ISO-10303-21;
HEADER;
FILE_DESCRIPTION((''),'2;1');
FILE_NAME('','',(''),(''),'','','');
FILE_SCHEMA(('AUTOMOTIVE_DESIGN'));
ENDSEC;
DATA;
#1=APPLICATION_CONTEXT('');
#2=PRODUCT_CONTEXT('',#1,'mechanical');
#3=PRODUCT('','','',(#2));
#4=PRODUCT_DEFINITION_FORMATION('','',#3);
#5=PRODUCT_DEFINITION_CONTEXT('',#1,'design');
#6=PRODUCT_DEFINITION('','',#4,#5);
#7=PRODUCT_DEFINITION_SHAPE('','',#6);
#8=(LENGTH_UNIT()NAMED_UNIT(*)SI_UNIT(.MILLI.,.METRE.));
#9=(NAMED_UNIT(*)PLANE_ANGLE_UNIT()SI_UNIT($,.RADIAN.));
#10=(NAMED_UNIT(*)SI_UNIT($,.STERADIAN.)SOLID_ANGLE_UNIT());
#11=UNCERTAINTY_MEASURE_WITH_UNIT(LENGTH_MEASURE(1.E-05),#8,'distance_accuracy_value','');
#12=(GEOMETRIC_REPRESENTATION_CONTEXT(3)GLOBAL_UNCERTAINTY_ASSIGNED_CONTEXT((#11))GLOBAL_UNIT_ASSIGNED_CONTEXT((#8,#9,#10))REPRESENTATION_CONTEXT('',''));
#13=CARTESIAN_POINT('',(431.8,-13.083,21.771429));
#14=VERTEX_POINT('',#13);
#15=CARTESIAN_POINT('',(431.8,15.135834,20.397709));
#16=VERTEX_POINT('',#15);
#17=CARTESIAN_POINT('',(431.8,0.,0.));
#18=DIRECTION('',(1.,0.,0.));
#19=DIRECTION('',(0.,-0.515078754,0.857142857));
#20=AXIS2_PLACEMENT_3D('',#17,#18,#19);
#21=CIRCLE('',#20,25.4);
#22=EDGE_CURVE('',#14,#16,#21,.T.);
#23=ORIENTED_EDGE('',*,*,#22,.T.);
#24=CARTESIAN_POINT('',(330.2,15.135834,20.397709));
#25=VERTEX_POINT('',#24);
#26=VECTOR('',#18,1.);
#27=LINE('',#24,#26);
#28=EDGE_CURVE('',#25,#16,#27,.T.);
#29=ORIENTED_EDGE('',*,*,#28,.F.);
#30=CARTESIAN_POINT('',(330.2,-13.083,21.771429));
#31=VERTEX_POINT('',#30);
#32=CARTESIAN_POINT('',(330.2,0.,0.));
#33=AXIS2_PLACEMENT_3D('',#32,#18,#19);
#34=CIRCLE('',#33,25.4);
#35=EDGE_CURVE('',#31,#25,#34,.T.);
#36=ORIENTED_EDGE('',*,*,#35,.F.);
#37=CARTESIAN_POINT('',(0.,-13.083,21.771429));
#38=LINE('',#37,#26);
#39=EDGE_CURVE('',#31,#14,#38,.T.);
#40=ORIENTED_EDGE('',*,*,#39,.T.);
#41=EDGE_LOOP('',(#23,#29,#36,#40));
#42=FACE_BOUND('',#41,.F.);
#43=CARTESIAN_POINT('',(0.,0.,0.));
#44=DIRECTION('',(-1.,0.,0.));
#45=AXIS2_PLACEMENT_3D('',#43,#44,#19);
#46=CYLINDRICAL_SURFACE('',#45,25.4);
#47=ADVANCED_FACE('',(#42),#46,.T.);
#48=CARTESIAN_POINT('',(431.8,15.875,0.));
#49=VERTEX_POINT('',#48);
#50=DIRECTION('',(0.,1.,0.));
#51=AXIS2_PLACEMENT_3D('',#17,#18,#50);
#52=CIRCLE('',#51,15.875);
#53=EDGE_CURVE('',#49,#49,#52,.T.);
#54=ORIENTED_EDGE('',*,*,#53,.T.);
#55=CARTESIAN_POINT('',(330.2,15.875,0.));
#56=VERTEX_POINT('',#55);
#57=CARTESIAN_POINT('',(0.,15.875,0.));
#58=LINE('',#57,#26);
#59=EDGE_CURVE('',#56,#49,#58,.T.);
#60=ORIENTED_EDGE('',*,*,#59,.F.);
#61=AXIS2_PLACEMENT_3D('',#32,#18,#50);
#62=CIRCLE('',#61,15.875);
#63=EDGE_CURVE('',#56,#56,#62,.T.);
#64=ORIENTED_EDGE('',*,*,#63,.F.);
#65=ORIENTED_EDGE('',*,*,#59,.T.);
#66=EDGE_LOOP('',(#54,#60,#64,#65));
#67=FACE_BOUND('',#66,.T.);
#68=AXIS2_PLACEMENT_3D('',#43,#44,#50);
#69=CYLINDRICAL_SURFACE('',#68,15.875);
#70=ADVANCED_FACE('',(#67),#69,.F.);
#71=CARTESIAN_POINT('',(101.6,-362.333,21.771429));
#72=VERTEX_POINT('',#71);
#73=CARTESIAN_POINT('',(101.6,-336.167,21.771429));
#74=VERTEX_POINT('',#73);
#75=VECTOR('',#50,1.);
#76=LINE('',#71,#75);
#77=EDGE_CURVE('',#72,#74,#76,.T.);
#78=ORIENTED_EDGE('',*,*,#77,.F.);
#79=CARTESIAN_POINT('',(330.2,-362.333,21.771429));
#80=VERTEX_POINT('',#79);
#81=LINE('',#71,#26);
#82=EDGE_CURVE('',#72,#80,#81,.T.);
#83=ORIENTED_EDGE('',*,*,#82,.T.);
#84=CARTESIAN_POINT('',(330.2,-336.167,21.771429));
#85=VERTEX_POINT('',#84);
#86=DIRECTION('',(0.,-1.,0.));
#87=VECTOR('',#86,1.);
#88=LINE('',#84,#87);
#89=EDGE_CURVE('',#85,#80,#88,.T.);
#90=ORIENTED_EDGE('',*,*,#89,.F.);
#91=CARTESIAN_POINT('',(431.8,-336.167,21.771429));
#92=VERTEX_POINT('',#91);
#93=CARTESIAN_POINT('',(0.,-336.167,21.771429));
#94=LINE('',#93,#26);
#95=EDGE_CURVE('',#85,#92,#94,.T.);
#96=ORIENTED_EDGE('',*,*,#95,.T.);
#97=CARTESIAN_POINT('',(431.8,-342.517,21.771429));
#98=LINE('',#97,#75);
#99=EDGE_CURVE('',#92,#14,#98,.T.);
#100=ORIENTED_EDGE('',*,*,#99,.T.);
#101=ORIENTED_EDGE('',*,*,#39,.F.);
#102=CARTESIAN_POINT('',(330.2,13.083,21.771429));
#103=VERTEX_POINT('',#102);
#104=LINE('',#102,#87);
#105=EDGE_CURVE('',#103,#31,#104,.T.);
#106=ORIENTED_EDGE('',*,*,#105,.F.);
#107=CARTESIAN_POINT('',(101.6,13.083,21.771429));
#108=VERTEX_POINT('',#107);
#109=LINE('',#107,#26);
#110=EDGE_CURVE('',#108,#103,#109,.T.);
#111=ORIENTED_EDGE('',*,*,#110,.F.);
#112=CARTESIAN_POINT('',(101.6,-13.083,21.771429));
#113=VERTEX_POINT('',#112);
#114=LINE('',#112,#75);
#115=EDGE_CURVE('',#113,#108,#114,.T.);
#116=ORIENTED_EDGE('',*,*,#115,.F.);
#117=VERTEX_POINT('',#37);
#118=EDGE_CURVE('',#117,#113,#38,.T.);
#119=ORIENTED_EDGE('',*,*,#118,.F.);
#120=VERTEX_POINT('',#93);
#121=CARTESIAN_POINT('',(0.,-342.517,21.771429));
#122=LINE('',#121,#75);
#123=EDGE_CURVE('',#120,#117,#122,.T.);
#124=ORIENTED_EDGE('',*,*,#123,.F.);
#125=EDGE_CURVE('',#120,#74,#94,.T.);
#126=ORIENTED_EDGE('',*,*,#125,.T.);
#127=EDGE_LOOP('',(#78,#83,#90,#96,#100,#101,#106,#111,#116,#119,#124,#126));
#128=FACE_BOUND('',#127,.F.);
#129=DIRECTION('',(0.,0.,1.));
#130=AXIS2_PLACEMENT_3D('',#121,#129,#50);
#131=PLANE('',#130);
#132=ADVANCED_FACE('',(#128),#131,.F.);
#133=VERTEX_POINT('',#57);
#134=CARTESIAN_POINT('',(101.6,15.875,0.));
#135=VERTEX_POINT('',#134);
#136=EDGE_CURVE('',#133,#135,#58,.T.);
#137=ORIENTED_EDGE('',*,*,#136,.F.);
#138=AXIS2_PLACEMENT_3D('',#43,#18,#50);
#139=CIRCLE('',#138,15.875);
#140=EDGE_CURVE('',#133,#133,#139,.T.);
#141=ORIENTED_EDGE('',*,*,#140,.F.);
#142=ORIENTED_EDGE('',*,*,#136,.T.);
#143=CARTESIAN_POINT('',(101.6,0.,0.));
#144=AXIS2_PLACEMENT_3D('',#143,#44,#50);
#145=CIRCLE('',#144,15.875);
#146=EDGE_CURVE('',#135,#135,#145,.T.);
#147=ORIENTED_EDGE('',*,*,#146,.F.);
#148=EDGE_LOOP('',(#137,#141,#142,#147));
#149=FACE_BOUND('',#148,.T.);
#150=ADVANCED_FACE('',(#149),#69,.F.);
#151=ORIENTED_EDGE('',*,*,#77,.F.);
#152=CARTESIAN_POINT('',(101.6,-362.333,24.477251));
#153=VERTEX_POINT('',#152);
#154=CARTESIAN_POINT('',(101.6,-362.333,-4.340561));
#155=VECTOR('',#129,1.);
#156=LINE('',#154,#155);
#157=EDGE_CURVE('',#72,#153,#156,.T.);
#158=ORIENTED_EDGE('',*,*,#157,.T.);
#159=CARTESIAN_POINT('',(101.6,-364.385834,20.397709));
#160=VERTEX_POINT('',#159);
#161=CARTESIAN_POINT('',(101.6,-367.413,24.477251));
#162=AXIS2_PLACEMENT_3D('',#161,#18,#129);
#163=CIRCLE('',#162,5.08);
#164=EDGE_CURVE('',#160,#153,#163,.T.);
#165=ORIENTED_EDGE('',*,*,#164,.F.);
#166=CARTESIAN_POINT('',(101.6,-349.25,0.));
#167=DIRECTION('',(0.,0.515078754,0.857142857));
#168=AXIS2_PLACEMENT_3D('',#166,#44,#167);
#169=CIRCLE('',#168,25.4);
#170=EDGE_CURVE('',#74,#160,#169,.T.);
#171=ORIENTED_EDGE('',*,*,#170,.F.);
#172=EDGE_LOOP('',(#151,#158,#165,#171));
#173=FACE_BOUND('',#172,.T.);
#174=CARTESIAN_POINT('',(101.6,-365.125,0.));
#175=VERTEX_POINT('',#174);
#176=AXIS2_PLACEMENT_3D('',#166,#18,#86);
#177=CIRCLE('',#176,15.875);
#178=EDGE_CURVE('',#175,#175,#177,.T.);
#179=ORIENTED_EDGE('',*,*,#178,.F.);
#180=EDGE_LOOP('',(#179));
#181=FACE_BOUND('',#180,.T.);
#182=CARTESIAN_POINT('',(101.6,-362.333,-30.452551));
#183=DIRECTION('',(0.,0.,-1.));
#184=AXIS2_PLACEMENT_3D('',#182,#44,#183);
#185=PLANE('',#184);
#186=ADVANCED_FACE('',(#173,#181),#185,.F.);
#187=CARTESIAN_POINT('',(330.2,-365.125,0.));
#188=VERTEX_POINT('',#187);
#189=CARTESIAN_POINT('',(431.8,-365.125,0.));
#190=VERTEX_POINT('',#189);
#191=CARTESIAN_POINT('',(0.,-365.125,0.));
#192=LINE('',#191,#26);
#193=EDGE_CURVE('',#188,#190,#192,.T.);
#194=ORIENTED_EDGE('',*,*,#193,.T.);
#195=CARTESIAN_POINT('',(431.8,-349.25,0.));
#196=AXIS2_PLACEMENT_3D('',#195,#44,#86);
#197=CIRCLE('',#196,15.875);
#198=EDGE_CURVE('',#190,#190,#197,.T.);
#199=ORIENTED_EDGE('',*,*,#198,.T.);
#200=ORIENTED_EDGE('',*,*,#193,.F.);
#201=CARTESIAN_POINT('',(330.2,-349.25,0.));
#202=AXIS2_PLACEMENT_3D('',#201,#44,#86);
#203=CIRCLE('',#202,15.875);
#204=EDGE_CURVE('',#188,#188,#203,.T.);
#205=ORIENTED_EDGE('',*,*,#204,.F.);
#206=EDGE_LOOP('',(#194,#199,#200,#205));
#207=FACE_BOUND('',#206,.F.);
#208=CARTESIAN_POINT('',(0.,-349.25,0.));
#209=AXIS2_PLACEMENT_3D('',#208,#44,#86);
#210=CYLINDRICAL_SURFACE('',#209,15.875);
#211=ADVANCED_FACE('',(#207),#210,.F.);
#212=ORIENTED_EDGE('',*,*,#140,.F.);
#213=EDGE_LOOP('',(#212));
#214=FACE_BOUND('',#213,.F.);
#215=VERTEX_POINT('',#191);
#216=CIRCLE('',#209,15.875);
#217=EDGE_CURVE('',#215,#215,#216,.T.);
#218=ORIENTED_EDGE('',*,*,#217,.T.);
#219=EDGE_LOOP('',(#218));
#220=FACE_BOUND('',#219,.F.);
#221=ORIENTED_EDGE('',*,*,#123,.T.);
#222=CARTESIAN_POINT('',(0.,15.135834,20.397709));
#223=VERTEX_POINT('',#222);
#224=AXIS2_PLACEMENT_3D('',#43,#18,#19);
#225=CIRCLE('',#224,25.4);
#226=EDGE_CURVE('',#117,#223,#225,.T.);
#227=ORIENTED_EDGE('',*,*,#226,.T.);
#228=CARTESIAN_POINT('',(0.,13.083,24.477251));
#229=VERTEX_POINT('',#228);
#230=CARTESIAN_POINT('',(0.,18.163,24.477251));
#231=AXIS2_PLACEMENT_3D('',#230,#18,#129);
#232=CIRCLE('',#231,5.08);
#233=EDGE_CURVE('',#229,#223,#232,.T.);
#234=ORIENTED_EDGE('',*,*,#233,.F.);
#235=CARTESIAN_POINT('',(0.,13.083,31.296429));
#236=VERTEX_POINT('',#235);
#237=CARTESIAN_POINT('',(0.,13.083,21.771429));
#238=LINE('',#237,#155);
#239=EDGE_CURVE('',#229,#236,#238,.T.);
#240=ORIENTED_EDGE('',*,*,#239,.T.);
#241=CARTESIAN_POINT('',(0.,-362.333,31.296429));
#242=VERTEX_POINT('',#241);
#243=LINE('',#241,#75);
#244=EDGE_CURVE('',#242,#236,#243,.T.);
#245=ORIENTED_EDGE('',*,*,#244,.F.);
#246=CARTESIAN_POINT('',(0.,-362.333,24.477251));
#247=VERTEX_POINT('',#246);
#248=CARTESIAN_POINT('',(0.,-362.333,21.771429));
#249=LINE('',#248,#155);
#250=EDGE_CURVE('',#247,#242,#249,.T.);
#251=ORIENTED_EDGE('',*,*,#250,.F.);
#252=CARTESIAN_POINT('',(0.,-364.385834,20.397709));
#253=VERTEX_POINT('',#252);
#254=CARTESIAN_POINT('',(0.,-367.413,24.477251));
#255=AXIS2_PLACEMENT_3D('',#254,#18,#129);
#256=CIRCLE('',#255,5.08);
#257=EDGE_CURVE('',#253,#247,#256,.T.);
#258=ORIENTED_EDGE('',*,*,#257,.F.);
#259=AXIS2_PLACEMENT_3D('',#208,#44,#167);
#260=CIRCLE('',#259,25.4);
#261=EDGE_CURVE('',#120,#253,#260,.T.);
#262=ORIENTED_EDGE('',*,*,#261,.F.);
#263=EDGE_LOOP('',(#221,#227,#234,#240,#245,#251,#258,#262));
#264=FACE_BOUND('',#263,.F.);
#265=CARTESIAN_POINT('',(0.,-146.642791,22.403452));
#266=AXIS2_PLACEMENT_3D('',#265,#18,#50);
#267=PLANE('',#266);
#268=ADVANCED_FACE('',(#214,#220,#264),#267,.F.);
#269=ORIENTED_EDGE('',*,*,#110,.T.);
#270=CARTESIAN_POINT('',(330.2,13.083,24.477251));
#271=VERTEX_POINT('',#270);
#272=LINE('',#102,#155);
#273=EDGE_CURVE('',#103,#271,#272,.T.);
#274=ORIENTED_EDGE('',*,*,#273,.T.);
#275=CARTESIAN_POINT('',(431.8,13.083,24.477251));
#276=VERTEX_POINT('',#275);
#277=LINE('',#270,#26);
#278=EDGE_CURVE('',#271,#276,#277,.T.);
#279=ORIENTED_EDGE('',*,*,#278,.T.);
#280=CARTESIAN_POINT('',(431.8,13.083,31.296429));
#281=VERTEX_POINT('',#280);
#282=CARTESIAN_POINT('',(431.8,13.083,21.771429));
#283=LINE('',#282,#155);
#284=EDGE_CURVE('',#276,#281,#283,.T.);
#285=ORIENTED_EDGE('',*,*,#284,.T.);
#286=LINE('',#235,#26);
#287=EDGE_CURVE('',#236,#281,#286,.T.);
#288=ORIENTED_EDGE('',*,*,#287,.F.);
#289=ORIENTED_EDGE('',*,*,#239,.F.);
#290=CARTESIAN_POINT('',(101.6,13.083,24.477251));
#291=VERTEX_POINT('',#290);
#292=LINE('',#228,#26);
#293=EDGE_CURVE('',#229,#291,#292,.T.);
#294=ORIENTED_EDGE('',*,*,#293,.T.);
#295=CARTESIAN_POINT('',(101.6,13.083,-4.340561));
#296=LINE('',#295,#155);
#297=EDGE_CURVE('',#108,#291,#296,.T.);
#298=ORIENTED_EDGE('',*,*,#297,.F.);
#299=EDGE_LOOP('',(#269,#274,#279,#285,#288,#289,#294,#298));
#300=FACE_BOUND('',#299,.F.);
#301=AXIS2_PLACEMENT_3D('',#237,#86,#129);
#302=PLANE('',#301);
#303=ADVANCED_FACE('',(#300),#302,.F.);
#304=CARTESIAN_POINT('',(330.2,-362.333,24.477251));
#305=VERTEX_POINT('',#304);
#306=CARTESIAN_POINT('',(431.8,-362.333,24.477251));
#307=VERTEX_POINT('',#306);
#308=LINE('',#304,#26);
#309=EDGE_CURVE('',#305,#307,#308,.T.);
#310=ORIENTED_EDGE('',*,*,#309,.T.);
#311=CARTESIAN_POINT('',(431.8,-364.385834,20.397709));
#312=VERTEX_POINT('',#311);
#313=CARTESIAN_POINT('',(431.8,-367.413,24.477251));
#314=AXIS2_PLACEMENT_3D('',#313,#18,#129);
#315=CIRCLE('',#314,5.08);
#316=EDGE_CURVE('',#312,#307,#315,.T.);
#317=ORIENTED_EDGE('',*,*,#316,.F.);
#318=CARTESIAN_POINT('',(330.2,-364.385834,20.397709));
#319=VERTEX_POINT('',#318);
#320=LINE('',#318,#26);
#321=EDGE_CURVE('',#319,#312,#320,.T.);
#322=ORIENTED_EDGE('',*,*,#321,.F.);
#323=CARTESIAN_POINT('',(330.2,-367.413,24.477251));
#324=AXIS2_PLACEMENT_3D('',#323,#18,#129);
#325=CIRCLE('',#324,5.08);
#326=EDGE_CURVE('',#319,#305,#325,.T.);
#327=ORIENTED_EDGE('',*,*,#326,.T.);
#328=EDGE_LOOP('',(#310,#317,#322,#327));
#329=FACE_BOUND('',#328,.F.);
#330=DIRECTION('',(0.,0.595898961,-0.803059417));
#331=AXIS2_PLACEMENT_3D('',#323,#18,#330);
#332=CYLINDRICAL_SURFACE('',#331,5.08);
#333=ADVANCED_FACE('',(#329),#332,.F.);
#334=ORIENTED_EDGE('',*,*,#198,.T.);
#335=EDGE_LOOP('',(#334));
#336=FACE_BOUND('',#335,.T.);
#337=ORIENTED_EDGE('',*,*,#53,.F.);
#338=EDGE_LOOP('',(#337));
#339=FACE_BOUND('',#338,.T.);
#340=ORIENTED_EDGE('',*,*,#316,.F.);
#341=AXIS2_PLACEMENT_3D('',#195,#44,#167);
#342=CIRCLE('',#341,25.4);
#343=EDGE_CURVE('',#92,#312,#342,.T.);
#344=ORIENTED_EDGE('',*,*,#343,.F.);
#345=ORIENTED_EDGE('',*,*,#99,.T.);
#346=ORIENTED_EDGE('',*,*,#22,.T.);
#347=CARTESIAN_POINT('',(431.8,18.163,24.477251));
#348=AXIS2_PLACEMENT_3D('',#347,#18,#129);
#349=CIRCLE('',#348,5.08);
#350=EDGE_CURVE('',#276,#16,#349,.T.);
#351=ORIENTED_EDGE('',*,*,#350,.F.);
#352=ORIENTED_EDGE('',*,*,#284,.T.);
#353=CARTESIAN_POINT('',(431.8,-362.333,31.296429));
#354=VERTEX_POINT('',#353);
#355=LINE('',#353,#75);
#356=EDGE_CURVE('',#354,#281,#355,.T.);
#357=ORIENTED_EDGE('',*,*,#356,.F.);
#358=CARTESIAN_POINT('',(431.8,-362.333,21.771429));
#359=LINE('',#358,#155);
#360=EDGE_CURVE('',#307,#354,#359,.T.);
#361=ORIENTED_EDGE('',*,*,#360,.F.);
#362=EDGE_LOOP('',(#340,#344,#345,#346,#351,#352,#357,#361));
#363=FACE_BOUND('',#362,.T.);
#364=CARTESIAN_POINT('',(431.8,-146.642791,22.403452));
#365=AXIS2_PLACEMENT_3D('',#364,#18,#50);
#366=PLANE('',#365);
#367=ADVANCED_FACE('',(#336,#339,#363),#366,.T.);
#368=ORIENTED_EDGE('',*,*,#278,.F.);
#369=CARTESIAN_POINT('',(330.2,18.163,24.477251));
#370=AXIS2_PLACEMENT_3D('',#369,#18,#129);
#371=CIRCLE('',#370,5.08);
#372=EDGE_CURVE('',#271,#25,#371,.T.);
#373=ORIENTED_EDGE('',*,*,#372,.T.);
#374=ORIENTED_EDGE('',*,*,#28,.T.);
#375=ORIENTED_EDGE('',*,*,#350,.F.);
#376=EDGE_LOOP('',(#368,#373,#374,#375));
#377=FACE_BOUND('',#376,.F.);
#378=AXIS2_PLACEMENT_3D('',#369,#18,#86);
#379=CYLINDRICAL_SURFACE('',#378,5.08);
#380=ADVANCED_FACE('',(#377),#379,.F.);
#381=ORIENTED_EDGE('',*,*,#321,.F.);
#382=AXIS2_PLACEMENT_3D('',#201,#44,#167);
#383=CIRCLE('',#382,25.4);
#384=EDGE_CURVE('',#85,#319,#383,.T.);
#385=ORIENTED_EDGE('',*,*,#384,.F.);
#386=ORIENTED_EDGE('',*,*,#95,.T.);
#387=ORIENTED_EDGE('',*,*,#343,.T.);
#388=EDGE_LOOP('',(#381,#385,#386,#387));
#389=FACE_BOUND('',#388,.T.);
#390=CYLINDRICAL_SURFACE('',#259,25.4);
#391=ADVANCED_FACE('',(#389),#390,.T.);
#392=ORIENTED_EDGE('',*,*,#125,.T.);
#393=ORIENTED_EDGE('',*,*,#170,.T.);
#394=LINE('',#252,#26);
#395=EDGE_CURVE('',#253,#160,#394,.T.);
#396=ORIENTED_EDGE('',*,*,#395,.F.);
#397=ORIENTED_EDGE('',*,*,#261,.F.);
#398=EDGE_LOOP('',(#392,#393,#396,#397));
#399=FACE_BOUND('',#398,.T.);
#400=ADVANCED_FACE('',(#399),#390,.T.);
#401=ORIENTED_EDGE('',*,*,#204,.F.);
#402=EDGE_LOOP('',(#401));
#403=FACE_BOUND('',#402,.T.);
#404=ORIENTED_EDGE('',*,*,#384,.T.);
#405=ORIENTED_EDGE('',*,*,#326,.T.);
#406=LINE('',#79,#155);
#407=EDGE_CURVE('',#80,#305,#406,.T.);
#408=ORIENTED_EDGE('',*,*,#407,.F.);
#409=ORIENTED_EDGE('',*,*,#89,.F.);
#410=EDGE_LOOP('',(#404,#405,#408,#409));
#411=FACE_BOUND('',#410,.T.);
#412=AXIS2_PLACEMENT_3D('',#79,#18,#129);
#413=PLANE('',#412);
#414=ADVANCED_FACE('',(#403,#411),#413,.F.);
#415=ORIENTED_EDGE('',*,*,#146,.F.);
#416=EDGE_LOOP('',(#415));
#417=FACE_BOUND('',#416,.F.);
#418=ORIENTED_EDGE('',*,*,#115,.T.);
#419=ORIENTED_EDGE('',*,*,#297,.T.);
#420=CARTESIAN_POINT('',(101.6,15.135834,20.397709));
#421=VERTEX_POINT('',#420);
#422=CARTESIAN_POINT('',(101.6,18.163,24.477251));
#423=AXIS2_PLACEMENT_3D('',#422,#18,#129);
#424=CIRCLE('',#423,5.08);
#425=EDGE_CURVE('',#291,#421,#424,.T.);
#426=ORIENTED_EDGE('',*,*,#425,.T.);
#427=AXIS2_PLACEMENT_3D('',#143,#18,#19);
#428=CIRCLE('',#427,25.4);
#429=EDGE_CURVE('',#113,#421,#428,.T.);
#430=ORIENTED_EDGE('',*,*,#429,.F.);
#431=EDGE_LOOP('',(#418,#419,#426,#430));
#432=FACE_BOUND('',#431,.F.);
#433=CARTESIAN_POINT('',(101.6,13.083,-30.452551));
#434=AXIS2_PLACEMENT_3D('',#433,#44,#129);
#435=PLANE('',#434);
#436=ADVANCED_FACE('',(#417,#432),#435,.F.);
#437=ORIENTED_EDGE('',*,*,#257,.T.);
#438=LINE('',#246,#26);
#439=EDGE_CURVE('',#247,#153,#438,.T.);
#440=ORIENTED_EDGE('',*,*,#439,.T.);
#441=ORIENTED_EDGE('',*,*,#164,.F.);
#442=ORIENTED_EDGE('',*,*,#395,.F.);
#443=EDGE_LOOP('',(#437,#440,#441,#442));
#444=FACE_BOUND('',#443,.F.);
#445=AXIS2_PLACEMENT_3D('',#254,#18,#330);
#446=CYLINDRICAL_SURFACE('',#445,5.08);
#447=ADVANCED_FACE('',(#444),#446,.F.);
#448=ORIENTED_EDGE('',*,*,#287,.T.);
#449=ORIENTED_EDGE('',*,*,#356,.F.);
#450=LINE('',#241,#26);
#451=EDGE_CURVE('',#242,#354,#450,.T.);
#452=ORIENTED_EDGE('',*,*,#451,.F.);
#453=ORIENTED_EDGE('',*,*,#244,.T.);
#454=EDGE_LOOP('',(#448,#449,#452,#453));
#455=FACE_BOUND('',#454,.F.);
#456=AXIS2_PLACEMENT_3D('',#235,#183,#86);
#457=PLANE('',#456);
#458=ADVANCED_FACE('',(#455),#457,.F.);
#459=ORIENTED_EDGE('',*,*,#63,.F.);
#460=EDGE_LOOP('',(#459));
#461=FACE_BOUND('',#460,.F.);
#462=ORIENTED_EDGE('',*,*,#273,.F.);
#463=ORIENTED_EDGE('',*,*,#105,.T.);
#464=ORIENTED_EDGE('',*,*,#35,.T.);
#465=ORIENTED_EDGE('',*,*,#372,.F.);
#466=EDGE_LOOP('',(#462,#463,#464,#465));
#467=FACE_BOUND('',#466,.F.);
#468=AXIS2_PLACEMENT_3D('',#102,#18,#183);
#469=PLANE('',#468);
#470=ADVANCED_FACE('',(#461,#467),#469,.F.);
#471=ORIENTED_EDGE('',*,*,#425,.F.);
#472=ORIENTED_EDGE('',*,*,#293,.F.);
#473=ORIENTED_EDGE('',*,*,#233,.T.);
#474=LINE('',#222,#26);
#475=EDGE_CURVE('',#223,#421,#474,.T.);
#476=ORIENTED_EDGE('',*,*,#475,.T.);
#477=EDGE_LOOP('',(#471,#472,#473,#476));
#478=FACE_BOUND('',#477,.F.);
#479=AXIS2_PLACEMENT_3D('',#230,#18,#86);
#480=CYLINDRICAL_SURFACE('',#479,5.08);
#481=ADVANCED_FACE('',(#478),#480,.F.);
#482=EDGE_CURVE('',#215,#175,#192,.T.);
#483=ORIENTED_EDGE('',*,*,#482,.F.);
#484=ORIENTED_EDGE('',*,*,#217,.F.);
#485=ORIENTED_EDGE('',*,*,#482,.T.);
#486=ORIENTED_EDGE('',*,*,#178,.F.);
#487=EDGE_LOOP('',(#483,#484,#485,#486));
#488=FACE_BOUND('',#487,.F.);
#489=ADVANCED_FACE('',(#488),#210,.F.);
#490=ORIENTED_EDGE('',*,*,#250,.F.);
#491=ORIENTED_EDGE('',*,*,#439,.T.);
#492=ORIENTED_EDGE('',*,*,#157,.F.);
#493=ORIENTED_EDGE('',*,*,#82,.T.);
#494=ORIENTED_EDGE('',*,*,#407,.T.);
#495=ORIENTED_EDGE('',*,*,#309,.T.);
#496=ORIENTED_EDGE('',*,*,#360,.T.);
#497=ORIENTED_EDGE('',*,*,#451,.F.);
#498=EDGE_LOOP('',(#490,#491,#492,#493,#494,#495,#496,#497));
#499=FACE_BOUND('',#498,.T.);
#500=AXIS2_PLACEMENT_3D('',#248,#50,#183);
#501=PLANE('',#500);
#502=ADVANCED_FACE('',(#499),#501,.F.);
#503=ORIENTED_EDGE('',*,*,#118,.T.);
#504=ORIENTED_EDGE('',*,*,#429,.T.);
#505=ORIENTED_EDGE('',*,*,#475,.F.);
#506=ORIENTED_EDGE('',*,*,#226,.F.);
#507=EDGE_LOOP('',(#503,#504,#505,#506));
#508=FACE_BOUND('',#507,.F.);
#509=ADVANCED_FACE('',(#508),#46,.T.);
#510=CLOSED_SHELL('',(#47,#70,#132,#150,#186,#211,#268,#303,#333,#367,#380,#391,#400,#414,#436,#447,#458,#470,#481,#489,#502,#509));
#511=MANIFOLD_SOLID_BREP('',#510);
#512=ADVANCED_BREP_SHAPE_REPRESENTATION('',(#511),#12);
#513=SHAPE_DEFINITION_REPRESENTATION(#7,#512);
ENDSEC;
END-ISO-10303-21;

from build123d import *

# Parameters (mm, degrees)
F0_R          = 15.875
F1_DEPTH      = 431.8
F3_DEPTH      = 67.056
F3_DEPTH_BACK = 51.816
F6_R          = 5.08


# Not quite as in the source:
# - a feature of the source that left no trace in its solid (it failed there, or was rolled back) is left out


with BuildPart() as f1:
    # F0 (on Right) → F1 (new body)
    with BuildSketch(Plane.YZ):
        with BuildLine():
            Line((-342.5169996576, 21.7714285714), (-13.0830003424, 21.7714285714))
            ThreePointArc((-13.0830003424, 21.7714285714), (0, -25.4), (13.0830003424, 21.7714285714))
            Line((13.0830003424, 21.7714285714), (13.0830003424, 31.2964285714))
            Line((13.0830003424, 31.2964285714), (-342.5169996576, 31.2964285714))
            Line((-342.5169996576, 31.2964285714), (-342.5169996576, 24.9464285714))
            Line((-342.5169996576, 24.9464285714), (-342.5169996576, 21.7714285714))
        make_face()
        Circle(F0_R, mode=Mode.SUBTRACT)
    extrude(amount=F1_DEPTH)

    # F2 (on face) → F3 (cut, two sides)
    with BuildSketch(Plane(origin=(0, 13.0830003424, 0), x_dir=(-1, 0, 0), z_dir=(0, 1, 0))) as f3_sk:
        Polygon((-101.6, 21.7714285714), (-215.9, 21.7714285714), (-330.2, 21.7714285714), (-330.2, -30.4525513202), (-228.6, -30.4525513202), (-101.6, -30.4525513202), align=None)
    extrude(amount=-F3_DEPTH, mode=Mode.SUBTRACT)
    extrude(f3_sk.sketch, amount=F3_DEPTH_BACK, mode=Mode.SUBTRACT)

    # F5: F1 across plane


with BuildPart() as f1_1:
    add(f1.part)
    add(f1.part.mirror(Plane.XZ.offset(174.625)))

    # F6
    f6_edges = [f1_1.edges().sort_by_distance(p)[0] for p in [
        (50.8, -362.333, 21.771429),
        (381, -362.333, 21.771429),
        (50.8, 13.083, 21.771429),
        (381, 13.083, 21.771429),
    ]]
    fillet(f6_edges, radius=F6_R)


solid = f1_1.part
